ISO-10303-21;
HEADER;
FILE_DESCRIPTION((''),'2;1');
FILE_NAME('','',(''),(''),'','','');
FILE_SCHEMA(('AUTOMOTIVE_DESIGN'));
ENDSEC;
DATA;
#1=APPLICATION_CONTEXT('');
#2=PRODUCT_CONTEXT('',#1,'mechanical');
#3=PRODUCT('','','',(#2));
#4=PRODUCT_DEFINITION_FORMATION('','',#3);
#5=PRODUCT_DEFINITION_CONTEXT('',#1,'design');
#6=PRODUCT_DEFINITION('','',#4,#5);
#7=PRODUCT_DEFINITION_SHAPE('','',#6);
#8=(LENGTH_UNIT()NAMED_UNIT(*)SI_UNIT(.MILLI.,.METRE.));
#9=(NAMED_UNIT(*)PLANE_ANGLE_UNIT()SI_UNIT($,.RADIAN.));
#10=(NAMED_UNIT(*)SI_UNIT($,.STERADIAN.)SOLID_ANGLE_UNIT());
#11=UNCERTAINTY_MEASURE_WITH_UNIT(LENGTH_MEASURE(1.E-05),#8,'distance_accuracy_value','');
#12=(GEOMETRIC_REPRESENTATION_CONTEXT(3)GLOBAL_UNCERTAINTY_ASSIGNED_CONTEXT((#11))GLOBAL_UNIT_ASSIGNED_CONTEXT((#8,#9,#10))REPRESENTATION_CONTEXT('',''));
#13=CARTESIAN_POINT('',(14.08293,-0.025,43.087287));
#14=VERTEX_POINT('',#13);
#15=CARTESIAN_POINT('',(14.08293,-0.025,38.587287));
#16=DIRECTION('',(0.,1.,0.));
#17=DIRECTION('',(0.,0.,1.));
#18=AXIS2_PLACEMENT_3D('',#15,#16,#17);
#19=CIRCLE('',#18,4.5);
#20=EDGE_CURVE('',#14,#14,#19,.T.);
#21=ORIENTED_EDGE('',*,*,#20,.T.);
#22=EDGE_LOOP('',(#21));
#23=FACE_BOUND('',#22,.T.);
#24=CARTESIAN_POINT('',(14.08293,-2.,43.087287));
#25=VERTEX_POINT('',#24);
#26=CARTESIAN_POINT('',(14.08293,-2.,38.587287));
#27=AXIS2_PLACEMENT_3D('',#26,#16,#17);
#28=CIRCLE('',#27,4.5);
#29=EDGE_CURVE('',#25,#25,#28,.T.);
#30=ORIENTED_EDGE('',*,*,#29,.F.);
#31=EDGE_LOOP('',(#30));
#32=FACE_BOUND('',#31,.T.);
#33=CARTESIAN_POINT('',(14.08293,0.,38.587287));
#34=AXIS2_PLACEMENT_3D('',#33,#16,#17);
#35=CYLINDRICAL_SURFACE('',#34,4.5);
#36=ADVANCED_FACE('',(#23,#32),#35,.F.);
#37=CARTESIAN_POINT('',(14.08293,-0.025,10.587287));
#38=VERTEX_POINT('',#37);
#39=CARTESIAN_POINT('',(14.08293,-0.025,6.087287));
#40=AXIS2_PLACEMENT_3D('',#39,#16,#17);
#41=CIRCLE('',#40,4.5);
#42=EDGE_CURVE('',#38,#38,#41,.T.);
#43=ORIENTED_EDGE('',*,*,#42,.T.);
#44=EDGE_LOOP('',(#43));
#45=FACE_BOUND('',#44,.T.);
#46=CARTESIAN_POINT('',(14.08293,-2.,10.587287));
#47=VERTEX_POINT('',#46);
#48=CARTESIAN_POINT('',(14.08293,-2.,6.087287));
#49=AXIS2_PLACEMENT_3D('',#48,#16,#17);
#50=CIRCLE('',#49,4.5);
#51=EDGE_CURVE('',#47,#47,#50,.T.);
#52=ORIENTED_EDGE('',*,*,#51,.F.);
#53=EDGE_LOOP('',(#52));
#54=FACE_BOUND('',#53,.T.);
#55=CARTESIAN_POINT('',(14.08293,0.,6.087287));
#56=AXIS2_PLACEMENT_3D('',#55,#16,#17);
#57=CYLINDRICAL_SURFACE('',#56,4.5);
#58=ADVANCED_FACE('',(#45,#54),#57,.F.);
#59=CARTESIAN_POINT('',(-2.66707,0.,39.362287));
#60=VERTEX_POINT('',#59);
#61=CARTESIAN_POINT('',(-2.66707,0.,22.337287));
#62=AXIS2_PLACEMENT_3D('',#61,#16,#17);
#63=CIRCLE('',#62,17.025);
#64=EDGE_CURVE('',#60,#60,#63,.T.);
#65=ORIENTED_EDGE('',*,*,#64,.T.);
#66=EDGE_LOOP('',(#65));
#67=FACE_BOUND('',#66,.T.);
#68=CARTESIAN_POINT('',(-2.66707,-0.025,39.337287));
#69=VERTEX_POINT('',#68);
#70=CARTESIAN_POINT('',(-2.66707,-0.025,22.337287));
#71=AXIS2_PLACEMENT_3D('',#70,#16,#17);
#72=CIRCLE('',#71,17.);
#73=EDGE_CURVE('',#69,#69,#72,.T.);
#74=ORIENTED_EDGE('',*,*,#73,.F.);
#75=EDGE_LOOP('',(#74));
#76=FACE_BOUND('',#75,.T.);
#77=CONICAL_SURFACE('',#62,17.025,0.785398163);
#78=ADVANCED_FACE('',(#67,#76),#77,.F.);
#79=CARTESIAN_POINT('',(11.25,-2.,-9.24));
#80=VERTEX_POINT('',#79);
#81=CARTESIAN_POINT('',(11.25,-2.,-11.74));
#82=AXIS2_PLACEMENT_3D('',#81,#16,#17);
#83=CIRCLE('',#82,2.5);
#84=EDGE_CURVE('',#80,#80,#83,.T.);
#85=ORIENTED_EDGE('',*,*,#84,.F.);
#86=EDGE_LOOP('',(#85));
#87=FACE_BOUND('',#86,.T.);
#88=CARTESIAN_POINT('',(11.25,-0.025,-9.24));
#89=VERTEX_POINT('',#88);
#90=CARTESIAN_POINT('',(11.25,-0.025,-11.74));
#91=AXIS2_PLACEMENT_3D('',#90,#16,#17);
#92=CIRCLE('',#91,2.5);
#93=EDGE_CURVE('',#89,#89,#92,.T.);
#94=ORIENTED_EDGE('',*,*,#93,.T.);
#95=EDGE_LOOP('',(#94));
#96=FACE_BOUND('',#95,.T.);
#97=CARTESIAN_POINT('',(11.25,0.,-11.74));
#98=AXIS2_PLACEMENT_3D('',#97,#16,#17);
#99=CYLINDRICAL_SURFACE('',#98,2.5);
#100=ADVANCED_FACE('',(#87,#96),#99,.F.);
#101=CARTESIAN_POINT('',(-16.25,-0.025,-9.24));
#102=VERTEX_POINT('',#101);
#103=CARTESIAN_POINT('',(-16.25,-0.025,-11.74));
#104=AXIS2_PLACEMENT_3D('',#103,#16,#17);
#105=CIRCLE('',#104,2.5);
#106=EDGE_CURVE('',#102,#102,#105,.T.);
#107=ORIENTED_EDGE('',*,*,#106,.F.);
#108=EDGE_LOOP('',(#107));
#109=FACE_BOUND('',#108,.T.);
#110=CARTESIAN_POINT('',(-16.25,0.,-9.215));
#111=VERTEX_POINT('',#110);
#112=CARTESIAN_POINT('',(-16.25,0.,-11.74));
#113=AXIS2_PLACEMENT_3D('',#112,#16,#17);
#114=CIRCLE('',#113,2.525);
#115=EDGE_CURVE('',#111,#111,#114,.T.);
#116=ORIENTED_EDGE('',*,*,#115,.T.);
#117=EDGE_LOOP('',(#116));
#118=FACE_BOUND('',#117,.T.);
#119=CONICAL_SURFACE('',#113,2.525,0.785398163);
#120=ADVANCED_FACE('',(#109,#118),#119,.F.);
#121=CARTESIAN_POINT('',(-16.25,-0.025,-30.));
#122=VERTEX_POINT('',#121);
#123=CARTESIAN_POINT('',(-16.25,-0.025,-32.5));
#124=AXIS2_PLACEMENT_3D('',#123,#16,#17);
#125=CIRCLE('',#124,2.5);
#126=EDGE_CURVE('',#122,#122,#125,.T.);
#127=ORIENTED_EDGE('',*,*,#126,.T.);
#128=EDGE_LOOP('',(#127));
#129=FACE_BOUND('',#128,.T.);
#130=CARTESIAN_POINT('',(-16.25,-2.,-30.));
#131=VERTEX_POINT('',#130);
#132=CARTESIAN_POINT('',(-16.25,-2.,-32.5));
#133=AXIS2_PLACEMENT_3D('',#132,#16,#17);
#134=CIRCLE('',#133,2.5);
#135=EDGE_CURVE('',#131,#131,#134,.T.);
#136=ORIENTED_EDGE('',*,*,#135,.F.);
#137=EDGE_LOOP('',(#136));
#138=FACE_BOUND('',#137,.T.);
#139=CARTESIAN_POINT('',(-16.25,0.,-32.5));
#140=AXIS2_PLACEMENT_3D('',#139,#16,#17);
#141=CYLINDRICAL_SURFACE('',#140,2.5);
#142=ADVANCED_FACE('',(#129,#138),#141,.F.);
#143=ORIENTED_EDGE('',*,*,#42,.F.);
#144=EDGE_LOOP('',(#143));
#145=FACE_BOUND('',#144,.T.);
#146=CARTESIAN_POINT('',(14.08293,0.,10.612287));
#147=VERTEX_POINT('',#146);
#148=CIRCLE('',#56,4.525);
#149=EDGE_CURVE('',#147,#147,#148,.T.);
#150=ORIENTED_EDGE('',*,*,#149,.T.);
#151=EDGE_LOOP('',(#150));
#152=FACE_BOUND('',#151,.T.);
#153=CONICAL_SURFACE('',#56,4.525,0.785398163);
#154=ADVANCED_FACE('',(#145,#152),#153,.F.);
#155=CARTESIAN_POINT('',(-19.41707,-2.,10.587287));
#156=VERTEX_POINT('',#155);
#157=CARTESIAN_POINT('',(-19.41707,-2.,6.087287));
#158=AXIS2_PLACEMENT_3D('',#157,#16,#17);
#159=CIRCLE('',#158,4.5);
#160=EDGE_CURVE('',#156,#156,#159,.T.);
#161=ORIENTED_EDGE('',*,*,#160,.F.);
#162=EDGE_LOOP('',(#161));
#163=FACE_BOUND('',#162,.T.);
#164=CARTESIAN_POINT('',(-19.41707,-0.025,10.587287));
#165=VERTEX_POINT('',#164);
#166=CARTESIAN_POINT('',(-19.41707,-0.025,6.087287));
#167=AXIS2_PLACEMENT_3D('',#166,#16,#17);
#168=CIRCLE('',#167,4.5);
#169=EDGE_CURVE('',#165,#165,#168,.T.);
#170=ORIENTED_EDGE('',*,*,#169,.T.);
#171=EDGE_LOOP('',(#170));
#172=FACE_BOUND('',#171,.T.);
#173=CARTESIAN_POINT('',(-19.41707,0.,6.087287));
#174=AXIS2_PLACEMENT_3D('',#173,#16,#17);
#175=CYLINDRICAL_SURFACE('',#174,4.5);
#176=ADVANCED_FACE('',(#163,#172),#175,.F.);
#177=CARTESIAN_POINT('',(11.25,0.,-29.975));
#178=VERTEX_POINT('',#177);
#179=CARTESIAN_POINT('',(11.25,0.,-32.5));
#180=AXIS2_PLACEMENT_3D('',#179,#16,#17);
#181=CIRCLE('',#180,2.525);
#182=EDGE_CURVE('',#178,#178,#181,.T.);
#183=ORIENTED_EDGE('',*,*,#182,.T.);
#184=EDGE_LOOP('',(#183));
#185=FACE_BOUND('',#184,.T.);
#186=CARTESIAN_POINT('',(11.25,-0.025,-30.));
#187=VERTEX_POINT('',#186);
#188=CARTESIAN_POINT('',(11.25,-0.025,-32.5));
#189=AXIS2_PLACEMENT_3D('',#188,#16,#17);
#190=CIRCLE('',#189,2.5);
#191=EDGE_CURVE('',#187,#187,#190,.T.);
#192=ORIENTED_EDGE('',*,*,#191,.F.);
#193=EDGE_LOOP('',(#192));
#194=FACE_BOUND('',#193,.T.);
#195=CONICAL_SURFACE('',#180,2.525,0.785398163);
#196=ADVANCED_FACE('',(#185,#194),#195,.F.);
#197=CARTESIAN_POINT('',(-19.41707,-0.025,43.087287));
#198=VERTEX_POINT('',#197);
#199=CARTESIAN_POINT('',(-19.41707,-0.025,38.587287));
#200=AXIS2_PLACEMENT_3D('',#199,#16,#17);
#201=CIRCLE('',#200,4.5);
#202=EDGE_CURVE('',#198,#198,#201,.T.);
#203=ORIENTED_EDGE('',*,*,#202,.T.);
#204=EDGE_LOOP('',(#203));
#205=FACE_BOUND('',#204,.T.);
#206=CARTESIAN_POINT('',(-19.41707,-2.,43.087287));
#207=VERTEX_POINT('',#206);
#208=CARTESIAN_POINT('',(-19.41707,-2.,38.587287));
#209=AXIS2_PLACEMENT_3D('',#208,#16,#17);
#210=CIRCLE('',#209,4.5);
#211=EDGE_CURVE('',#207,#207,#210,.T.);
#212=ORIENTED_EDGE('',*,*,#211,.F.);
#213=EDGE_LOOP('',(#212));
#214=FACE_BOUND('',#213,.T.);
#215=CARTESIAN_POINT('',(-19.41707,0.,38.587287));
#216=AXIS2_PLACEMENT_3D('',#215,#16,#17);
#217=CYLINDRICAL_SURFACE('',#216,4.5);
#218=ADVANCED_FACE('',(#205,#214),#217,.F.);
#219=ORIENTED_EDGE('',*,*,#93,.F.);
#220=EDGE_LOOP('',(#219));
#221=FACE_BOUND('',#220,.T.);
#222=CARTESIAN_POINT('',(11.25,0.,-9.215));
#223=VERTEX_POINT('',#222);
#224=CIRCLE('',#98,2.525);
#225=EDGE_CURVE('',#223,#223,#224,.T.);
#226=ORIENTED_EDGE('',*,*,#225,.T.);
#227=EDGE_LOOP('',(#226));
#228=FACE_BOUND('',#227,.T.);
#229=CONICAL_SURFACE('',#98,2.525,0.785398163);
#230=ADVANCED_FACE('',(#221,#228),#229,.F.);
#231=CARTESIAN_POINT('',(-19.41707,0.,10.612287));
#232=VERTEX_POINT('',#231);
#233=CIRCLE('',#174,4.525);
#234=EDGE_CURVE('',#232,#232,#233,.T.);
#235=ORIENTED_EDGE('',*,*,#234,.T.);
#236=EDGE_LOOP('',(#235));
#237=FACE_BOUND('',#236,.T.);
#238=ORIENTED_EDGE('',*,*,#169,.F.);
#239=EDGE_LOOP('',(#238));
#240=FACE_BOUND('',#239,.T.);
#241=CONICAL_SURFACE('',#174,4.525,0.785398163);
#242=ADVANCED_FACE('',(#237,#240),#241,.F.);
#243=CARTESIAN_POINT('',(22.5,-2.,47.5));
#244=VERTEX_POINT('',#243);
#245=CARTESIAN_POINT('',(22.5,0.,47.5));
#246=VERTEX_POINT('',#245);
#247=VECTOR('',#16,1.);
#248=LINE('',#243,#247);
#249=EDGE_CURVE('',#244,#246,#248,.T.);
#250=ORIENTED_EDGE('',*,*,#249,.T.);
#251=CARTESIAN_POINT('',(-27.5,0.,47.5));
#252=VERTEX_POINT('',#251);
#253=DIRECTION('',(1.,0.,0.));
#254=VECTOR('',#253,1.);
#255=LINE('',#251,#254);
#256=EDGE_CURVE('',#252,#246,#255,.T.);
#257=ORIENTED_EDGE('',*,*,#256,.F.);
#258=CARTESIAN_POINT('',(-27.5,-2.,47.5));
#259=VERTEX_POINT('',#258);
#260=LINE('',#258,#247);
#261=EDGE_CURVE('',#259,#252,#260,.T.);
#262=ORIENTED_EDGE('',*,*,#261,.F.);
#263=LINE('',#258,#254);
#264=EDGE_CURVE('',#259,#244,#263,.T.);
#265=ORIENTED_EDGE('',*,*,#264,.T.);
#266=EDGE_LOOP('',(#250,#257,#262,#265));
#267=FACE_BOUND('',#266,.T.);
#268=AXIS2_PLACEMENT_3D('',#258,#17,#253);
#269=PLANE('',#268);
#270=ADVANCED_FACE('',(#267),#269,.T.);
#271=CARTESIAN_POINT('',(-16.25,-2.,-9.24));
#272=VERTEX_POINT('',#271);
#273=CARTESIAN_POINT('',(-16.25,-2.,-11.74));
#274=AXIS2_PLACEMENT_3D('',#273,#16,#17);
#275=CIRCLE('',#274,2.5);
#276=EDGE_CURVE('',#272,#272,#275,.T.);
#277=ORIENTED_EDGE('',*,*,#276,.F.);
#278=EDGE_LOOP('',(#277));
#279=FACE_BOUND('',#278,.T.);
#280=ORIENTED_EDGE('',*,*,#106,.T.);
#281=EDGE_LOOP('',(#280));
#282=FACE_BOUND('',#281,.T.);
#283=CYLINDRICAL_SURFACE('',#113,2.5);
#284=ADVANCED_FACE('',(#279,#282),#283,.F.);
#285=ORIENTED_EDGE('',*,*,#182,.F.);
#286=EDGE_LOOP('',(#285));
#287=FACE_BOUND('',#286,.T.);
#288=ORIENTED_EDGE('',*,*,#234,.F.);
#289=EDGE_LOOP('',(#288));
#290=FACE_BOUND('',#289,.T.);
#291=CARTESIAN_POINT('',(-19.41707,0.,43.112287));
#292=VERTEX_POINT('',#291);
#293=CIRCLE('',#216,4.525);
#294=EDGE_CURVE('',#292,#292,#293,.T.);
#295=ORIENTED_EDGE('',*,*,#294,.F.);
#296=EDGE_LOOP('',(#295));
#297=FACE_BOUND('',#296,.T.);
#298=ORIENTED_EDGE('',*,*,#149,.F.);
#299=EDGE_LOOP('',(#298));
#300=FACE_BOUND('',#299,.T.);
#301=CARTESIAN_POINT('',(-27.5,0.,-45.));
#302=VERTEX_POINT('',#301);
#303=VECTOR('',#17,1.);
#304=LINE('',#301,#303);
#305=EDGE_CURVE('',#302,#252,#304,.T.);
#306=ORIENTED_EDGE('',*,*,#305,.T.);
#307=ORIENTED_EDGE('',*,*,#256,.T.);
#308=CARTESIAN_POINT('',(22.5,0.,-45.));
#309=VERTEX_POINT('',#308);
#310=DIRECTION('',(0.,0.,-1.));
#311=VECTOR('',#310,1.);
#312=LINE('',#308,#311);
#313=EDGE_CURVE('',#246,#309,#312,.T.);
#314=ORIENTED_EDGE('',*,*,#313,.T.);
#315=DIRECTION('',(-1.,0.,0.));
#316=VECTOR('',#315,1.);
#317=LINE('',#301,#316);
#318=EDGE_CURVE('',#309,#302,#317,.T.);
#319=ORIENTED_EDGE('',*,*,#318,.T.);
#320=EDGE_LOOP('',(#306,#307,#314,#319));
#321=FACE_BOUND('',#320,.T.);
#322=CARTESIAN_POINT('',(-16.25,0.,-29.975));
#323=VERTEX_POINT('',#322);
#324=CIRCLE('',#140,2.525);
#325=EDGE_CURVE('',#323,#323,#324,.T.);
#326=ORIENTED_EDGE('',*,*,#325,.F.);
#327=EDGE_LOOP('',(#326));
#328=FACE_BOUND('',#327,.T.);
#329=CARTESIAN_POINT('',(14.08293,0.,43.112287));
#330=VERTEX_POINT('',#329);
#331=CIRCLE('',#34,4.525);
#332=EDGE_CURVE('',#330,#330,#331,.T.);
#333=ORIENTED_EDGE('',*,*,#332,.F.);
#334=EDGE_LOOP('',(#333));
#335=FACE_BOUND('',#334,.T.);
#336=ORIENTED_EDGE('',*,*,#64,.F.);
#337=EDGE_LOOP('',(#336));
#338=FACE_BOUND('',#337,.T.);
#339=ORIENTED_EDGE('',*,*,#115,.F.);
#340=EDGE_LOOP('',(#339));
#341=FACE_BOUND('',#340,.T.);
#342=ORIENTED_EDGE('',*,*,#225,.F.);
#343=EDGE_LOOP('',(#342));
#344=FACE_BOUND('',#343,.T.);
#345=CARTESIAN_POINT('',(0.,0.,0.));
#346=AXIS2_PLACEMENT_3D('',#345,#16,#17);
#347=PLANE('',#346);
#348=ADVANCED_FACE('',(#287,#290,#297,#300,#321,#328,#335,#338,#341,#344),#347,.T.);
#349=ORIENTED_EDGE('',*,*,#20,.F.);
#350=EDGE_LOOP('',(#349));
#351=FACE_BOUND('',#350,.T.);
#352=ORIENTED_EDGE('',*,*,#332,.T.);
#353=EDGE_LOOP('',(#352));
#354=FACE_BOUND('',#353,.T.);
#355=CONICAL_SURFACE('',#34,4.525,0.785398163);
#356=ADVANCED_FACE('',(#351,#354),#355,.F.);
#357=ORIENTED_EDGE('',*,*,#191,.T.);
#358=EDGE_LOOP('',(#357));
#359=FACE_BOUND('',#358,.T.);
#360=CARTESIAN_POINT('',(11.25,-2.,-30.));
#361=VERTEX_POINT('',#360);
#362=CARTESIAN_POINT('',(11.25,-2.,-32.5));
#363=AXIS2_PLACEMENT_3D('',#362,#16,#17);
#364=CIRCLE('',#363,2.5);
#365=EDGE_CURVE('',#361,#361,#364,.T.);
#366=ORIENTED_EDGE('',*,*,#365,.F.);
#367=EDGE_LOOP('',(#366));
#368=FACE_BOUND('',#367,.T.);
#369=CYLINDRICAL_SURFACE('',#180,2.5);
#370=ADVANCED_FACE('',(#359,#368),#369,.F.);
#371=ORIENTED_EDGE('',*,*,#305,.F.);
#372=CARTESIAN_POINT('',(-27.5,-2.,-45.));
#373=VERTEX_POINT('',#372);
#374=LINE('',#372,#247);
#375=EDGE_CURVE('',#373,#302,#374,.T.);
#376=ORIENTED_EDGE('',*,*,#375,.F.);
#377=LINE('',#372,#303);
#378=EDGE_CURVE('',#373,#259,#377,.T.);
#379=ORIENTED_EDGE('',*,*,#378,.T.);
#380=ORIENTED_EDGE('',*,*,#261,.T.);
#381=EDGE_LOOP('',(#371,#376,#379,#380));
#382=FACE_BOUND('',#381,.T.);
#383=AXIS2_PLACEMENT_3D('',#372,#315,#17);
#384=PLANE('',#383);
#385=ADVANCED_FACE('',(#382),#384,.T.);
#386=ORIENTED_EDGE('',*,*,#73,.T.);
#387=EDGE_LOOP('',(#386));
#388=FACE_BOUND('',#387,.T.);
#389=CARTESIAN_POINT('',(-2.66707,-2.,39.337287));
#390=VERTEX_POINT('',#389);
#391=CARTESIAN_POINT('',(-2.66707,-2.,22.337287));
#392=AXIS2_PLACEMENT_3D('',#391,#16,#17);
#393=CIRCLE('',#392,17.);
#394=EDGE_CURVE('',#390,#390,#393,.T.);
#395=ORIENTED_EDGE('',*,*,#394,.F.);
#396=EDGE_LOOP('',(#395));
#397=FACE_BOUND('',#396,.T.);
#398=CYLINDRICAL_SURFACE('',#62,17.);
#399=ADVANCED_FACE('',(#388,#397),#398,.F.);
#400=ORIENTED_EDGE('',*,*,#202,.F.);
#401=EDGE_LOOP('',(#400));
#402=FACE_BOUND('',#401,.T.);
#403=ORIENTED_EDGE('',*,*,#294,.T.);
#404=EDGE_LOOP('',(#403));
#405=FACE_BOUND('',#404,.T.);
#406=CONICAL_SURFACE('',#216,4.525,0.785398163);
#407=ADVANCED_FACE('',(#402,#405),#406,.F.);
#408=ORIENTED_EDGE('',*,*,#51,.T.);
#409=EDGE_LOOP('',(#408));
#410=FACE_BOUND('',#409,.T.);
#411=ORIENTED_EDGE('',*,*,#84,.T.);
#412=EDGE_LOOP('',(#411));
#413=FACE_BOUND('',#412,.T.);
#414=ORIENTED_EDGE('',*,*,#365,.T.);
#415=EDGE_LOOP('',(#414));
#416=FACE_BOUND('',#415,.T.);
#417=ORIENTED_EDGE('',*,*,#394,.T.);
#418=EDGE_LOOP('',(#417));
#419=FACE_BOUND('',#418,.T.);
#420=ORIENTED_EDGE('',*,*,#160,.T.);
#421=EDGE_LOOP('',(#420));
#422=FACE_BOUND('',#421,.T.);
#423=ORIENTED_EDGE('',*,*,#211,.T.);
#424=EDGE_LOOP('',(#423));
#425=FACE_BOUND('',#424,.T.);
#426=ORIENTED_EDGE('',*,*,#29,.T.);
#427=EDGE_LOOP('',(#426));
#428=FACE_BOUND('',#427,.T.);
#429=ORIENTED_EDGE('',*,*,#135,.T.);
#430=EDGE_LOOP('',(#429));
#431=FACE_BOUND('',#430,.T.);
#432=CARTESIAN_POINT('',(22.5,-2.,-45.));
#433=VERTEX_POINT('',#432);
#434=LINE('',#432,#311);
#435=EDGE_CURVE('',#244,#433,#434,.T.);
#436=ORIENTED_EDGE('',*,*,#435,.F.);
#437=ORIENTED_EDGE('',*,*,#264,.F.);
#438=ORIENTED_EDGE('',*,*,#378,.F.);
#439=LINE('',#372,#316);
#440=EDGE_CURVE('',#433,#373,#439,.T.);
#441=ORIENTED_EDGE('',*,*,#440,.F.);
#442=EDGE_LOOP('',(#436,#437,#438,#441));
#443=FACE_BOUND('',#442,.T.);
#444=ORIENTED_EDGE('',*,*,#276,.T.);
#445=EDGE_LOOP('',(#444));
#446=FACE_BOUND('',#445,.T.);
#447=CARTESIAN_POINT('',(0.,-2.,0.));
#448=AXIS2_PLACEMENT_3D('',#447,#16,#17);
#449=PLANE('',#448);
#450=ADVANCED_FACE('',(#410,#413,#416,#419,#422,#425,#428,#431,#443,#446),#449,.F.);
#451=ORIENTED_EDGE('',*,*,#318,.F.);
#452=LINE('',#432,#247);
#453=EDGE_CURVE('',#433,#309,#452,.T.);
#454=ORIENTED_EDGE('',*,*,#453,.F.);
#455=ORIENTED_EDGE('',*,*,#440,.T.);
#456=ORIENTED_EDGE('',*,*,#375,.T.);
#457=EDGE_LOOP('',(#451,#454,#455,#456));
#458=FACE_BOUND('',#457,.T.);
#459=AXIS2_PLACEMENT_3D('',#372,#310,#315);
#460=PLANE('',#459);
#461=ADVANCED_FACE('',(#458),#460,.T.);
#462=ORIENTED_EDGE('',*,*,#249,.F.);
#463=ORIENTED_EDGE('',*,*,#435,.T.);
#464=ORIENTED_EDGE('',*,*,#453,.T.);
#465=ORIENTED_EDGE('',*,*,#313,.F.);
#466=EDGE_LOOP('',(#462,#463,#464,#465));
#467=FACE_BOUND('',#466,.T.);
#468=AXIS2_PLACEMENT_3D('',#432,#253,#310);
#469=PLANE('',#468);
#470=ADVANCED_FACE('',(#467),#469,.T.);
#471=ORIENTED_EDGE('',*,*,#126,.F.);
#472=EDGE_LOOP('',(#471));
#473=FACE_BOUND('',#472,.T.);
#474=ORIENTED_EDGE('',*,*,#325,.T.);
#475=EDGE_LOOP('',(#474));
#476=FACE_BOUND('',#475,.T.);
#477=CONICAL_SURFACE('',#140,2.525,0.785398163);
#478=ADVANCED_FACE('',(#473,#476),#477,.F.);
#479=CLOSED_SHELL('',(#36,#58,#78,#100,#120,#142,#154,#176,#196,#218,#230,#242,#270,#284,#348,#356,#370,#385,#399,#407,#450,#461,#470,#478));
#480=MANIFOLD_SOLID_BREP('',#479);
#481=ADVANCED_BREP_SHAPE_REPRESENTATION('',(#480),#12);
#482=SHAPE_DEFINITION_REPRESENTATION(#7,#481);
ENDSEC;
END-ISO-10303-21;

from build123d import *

# Parameters (mm, degrees)
SKETCH2_W                             = 50
SKETCH2_H                             = 92.5
BASE_FLANGE1_DEPTH                    = 2
TAP_DRILL_FOR_M6_TAP1_AT_2_COUNT      = 2
TAP_DRILL_FOR_M6_TAP1_AT_2_PITCH      = 34.456169259
TAP_DRILL_FOR_M6_TAP1_AT_3_COUNT      = 2
TAP_DRILL_FOR_M6_TAP1_AT_3_PITCH      = 27.5
TAP_DRILL_FOR_M6_TAP1_AT_4_COUNT      = 2
TAP_DRILL_FOR_M6_TAP1_AT_4_PITCH      = 20.76
TAP_DRILL_FOR_M10X1_0_TAP1_AT_2_COUNT = 2
TAP_DRILL_FOR_M10X1_0_TAP1_AT_2_PITCH = 32.5
TAP_DRILL_FOR_M10X1_0_TAP1_AT_3_COUNT = 2
TAP_DRILL_FOR_M10X1_0_TAP1_AT_3_PITCH = 46.67440412
TAP_DRILL_FOR_M10X1_0_TAP1_AT_4_COUNT = 2
TAP_DRILL_FOR_M10X1_0_TAP1_AT_4_PITCH = 33.5


# Sheet-metal steps are written as plain solids
with BuildPart() as part:
    # Sketch2 → Base-Flange1 (new body)
    with BuildSketch(Plane(origin=(0, 0, 0), x_dir=(1, 0, 0), z_dir=(0, 1, 0))):
        with Locations((-2.5, -1.25)):
            Rectangle(SKETCH2_W, SKETCH2_H)
    extrude(amount=-BASE_FLANGE1_DEPTH)

    # Sketch8 → Tap Drill for M6 Tap1 (revolve, cut)
    with BuildSketch(Plane(origin=(11.25, 0, -11.74), x_dir=(0, 0, 1), z_dir=(1, 0, 0))):
        Polygon((0, 0), (0, 2), (2.5, 2), (2.5, 0.025), (2.525, 0), align=None)
    tap_drill_for_m6_tap1 = revolve(axis=Axis((11.25, 6.35, -11.74), (0, -1, 0)), mode=Mode.SUBTRACT)

    # Tap Drill for M6 Tap1 at 2: Tap Drill for M6 Tap1 ×2
    with Locations(*[Vector(-0.7981154200092394, 0, -0.6025045861597035) * (i * TAP_DRILL_FOR_M6_TAP1_AT_2_PITCH) for i in range(1, TAP_DRILL_FOR_M6_TAP1_AT_2_COUNT)]):
        add(tap_drill_for_m6_tap1, mode=Mode.SUBTRACT)

    # Tap Drill for M6 Tap1 at 3: Tap Drill for M6 Tap1 ×2
    with Locations(*[(-i * TAP_DRILL_FOR_M6_TAP1_AT_3_PITCH, 0, 0) for i in range(1, TAP_DRILL_FOR_M6_TAP1_AT_3_COUNT)]):
        add(tap_drill_for_m6_tap1, mode=Mode.SUBTRACT)

    # Tap Drill for M6 Tap1 at 4: Tap Drill for M6 Tap1 ×2
    with Locations(*[(0, 0, -i * TAP_DRILL_FOR_M6_TAP1_AT_4_PITCH) for i in range(1, TAP_DRILL_FOR_M6_TAP1_AT_4_COUNT)]):
        add(tap_drill_for_m6_tap1, mode=Mode.SUBTRACT)

    # Sketch15 → Tap Drill for M10x1.0 Tap1 (revolve, cut)
    with BuildSketch(Plane(origin=(-19.417070164, 0, 6.087287234), x_dir=(0, 0, 1), z_dir=(1, 0, 0))):
        Polygon((0, 0), (0, 2), (4.5, 2), (4.5, 0.025), (4.525, 0), align=None)
    tap_drill_for_m10x1_0_tap1 = revolve(axis=Axis((-19.417070164, 6.35, 6.087287234), (0, -1, 0)), mode=Mode.SUBTRACT)

    # Tap Drill for M10x1.0 Tap1 at 2: Tap Drill for M10x1.0 Tap1 ×2
    with Locations(*[(0, 0, i * TAP_DRILL_FOR_M10X1_0_TAP1_AT_2_PITCH) for i in range(1, TAP_DRILL_FOR_M10X1_0_TAP1_AT_2_COUNT)]):
        add(tap_drill_for_m10x1_0_tap1, mode=Mode.SUBTRACT)

    # Tap Drill for M10x1.0 Tap1 at 3: Tap Drill for M10x1.0 Tap1 ×2
    with Locations(*[Vector(0.7177381400208425, 0, 0.6963131209157426) * (i * TAP_DRILL_FOR_M10X1_0_TAP1_AT_3_PITCH) for i in range(1, TAP_DRILL_FOR_M10X1_0_TAP1_AT_3_COUNT)]):
        add(tap_drill_for_m10x1_0_tap1, mode=Mode.SUBTRACT)

    # Tap Drill for M10x1.0 Tap1 at 4: Tap Drill for M10x1.0 Tap1 ×2
    with Locations(*[(i * TAP_DRILL_FOR_M10X1_0_TAP1_AT_4_PITCH, 0, 0) for i in range(1, TAP_DRILL_FOR_M10X1_0_TAP1_AT_4_COUNT)]):
        add(tap_drill_for_m10x1_0_tap1, mode=Mode.SUBTRACT)

    # Sketch18 → Tap Drill for M36x2.0 Tap1 (revolve, cut)
    with BuildSketch(Plane(origin=(-2.667070164, 0, 22.337287234), x_dir=(0, 0, 1), z_dir=(1, 0, 0))):
        Polygon((0, 0), (0, 2), (17, 2), (17, 0.025), (17.025, 0), align=None)
    revolve(axis=Axis((-2.667070164, 6.35, 22.337287234), (0, -1, 0)), mode=Mode.SUBTRACT)


solid = part.part
